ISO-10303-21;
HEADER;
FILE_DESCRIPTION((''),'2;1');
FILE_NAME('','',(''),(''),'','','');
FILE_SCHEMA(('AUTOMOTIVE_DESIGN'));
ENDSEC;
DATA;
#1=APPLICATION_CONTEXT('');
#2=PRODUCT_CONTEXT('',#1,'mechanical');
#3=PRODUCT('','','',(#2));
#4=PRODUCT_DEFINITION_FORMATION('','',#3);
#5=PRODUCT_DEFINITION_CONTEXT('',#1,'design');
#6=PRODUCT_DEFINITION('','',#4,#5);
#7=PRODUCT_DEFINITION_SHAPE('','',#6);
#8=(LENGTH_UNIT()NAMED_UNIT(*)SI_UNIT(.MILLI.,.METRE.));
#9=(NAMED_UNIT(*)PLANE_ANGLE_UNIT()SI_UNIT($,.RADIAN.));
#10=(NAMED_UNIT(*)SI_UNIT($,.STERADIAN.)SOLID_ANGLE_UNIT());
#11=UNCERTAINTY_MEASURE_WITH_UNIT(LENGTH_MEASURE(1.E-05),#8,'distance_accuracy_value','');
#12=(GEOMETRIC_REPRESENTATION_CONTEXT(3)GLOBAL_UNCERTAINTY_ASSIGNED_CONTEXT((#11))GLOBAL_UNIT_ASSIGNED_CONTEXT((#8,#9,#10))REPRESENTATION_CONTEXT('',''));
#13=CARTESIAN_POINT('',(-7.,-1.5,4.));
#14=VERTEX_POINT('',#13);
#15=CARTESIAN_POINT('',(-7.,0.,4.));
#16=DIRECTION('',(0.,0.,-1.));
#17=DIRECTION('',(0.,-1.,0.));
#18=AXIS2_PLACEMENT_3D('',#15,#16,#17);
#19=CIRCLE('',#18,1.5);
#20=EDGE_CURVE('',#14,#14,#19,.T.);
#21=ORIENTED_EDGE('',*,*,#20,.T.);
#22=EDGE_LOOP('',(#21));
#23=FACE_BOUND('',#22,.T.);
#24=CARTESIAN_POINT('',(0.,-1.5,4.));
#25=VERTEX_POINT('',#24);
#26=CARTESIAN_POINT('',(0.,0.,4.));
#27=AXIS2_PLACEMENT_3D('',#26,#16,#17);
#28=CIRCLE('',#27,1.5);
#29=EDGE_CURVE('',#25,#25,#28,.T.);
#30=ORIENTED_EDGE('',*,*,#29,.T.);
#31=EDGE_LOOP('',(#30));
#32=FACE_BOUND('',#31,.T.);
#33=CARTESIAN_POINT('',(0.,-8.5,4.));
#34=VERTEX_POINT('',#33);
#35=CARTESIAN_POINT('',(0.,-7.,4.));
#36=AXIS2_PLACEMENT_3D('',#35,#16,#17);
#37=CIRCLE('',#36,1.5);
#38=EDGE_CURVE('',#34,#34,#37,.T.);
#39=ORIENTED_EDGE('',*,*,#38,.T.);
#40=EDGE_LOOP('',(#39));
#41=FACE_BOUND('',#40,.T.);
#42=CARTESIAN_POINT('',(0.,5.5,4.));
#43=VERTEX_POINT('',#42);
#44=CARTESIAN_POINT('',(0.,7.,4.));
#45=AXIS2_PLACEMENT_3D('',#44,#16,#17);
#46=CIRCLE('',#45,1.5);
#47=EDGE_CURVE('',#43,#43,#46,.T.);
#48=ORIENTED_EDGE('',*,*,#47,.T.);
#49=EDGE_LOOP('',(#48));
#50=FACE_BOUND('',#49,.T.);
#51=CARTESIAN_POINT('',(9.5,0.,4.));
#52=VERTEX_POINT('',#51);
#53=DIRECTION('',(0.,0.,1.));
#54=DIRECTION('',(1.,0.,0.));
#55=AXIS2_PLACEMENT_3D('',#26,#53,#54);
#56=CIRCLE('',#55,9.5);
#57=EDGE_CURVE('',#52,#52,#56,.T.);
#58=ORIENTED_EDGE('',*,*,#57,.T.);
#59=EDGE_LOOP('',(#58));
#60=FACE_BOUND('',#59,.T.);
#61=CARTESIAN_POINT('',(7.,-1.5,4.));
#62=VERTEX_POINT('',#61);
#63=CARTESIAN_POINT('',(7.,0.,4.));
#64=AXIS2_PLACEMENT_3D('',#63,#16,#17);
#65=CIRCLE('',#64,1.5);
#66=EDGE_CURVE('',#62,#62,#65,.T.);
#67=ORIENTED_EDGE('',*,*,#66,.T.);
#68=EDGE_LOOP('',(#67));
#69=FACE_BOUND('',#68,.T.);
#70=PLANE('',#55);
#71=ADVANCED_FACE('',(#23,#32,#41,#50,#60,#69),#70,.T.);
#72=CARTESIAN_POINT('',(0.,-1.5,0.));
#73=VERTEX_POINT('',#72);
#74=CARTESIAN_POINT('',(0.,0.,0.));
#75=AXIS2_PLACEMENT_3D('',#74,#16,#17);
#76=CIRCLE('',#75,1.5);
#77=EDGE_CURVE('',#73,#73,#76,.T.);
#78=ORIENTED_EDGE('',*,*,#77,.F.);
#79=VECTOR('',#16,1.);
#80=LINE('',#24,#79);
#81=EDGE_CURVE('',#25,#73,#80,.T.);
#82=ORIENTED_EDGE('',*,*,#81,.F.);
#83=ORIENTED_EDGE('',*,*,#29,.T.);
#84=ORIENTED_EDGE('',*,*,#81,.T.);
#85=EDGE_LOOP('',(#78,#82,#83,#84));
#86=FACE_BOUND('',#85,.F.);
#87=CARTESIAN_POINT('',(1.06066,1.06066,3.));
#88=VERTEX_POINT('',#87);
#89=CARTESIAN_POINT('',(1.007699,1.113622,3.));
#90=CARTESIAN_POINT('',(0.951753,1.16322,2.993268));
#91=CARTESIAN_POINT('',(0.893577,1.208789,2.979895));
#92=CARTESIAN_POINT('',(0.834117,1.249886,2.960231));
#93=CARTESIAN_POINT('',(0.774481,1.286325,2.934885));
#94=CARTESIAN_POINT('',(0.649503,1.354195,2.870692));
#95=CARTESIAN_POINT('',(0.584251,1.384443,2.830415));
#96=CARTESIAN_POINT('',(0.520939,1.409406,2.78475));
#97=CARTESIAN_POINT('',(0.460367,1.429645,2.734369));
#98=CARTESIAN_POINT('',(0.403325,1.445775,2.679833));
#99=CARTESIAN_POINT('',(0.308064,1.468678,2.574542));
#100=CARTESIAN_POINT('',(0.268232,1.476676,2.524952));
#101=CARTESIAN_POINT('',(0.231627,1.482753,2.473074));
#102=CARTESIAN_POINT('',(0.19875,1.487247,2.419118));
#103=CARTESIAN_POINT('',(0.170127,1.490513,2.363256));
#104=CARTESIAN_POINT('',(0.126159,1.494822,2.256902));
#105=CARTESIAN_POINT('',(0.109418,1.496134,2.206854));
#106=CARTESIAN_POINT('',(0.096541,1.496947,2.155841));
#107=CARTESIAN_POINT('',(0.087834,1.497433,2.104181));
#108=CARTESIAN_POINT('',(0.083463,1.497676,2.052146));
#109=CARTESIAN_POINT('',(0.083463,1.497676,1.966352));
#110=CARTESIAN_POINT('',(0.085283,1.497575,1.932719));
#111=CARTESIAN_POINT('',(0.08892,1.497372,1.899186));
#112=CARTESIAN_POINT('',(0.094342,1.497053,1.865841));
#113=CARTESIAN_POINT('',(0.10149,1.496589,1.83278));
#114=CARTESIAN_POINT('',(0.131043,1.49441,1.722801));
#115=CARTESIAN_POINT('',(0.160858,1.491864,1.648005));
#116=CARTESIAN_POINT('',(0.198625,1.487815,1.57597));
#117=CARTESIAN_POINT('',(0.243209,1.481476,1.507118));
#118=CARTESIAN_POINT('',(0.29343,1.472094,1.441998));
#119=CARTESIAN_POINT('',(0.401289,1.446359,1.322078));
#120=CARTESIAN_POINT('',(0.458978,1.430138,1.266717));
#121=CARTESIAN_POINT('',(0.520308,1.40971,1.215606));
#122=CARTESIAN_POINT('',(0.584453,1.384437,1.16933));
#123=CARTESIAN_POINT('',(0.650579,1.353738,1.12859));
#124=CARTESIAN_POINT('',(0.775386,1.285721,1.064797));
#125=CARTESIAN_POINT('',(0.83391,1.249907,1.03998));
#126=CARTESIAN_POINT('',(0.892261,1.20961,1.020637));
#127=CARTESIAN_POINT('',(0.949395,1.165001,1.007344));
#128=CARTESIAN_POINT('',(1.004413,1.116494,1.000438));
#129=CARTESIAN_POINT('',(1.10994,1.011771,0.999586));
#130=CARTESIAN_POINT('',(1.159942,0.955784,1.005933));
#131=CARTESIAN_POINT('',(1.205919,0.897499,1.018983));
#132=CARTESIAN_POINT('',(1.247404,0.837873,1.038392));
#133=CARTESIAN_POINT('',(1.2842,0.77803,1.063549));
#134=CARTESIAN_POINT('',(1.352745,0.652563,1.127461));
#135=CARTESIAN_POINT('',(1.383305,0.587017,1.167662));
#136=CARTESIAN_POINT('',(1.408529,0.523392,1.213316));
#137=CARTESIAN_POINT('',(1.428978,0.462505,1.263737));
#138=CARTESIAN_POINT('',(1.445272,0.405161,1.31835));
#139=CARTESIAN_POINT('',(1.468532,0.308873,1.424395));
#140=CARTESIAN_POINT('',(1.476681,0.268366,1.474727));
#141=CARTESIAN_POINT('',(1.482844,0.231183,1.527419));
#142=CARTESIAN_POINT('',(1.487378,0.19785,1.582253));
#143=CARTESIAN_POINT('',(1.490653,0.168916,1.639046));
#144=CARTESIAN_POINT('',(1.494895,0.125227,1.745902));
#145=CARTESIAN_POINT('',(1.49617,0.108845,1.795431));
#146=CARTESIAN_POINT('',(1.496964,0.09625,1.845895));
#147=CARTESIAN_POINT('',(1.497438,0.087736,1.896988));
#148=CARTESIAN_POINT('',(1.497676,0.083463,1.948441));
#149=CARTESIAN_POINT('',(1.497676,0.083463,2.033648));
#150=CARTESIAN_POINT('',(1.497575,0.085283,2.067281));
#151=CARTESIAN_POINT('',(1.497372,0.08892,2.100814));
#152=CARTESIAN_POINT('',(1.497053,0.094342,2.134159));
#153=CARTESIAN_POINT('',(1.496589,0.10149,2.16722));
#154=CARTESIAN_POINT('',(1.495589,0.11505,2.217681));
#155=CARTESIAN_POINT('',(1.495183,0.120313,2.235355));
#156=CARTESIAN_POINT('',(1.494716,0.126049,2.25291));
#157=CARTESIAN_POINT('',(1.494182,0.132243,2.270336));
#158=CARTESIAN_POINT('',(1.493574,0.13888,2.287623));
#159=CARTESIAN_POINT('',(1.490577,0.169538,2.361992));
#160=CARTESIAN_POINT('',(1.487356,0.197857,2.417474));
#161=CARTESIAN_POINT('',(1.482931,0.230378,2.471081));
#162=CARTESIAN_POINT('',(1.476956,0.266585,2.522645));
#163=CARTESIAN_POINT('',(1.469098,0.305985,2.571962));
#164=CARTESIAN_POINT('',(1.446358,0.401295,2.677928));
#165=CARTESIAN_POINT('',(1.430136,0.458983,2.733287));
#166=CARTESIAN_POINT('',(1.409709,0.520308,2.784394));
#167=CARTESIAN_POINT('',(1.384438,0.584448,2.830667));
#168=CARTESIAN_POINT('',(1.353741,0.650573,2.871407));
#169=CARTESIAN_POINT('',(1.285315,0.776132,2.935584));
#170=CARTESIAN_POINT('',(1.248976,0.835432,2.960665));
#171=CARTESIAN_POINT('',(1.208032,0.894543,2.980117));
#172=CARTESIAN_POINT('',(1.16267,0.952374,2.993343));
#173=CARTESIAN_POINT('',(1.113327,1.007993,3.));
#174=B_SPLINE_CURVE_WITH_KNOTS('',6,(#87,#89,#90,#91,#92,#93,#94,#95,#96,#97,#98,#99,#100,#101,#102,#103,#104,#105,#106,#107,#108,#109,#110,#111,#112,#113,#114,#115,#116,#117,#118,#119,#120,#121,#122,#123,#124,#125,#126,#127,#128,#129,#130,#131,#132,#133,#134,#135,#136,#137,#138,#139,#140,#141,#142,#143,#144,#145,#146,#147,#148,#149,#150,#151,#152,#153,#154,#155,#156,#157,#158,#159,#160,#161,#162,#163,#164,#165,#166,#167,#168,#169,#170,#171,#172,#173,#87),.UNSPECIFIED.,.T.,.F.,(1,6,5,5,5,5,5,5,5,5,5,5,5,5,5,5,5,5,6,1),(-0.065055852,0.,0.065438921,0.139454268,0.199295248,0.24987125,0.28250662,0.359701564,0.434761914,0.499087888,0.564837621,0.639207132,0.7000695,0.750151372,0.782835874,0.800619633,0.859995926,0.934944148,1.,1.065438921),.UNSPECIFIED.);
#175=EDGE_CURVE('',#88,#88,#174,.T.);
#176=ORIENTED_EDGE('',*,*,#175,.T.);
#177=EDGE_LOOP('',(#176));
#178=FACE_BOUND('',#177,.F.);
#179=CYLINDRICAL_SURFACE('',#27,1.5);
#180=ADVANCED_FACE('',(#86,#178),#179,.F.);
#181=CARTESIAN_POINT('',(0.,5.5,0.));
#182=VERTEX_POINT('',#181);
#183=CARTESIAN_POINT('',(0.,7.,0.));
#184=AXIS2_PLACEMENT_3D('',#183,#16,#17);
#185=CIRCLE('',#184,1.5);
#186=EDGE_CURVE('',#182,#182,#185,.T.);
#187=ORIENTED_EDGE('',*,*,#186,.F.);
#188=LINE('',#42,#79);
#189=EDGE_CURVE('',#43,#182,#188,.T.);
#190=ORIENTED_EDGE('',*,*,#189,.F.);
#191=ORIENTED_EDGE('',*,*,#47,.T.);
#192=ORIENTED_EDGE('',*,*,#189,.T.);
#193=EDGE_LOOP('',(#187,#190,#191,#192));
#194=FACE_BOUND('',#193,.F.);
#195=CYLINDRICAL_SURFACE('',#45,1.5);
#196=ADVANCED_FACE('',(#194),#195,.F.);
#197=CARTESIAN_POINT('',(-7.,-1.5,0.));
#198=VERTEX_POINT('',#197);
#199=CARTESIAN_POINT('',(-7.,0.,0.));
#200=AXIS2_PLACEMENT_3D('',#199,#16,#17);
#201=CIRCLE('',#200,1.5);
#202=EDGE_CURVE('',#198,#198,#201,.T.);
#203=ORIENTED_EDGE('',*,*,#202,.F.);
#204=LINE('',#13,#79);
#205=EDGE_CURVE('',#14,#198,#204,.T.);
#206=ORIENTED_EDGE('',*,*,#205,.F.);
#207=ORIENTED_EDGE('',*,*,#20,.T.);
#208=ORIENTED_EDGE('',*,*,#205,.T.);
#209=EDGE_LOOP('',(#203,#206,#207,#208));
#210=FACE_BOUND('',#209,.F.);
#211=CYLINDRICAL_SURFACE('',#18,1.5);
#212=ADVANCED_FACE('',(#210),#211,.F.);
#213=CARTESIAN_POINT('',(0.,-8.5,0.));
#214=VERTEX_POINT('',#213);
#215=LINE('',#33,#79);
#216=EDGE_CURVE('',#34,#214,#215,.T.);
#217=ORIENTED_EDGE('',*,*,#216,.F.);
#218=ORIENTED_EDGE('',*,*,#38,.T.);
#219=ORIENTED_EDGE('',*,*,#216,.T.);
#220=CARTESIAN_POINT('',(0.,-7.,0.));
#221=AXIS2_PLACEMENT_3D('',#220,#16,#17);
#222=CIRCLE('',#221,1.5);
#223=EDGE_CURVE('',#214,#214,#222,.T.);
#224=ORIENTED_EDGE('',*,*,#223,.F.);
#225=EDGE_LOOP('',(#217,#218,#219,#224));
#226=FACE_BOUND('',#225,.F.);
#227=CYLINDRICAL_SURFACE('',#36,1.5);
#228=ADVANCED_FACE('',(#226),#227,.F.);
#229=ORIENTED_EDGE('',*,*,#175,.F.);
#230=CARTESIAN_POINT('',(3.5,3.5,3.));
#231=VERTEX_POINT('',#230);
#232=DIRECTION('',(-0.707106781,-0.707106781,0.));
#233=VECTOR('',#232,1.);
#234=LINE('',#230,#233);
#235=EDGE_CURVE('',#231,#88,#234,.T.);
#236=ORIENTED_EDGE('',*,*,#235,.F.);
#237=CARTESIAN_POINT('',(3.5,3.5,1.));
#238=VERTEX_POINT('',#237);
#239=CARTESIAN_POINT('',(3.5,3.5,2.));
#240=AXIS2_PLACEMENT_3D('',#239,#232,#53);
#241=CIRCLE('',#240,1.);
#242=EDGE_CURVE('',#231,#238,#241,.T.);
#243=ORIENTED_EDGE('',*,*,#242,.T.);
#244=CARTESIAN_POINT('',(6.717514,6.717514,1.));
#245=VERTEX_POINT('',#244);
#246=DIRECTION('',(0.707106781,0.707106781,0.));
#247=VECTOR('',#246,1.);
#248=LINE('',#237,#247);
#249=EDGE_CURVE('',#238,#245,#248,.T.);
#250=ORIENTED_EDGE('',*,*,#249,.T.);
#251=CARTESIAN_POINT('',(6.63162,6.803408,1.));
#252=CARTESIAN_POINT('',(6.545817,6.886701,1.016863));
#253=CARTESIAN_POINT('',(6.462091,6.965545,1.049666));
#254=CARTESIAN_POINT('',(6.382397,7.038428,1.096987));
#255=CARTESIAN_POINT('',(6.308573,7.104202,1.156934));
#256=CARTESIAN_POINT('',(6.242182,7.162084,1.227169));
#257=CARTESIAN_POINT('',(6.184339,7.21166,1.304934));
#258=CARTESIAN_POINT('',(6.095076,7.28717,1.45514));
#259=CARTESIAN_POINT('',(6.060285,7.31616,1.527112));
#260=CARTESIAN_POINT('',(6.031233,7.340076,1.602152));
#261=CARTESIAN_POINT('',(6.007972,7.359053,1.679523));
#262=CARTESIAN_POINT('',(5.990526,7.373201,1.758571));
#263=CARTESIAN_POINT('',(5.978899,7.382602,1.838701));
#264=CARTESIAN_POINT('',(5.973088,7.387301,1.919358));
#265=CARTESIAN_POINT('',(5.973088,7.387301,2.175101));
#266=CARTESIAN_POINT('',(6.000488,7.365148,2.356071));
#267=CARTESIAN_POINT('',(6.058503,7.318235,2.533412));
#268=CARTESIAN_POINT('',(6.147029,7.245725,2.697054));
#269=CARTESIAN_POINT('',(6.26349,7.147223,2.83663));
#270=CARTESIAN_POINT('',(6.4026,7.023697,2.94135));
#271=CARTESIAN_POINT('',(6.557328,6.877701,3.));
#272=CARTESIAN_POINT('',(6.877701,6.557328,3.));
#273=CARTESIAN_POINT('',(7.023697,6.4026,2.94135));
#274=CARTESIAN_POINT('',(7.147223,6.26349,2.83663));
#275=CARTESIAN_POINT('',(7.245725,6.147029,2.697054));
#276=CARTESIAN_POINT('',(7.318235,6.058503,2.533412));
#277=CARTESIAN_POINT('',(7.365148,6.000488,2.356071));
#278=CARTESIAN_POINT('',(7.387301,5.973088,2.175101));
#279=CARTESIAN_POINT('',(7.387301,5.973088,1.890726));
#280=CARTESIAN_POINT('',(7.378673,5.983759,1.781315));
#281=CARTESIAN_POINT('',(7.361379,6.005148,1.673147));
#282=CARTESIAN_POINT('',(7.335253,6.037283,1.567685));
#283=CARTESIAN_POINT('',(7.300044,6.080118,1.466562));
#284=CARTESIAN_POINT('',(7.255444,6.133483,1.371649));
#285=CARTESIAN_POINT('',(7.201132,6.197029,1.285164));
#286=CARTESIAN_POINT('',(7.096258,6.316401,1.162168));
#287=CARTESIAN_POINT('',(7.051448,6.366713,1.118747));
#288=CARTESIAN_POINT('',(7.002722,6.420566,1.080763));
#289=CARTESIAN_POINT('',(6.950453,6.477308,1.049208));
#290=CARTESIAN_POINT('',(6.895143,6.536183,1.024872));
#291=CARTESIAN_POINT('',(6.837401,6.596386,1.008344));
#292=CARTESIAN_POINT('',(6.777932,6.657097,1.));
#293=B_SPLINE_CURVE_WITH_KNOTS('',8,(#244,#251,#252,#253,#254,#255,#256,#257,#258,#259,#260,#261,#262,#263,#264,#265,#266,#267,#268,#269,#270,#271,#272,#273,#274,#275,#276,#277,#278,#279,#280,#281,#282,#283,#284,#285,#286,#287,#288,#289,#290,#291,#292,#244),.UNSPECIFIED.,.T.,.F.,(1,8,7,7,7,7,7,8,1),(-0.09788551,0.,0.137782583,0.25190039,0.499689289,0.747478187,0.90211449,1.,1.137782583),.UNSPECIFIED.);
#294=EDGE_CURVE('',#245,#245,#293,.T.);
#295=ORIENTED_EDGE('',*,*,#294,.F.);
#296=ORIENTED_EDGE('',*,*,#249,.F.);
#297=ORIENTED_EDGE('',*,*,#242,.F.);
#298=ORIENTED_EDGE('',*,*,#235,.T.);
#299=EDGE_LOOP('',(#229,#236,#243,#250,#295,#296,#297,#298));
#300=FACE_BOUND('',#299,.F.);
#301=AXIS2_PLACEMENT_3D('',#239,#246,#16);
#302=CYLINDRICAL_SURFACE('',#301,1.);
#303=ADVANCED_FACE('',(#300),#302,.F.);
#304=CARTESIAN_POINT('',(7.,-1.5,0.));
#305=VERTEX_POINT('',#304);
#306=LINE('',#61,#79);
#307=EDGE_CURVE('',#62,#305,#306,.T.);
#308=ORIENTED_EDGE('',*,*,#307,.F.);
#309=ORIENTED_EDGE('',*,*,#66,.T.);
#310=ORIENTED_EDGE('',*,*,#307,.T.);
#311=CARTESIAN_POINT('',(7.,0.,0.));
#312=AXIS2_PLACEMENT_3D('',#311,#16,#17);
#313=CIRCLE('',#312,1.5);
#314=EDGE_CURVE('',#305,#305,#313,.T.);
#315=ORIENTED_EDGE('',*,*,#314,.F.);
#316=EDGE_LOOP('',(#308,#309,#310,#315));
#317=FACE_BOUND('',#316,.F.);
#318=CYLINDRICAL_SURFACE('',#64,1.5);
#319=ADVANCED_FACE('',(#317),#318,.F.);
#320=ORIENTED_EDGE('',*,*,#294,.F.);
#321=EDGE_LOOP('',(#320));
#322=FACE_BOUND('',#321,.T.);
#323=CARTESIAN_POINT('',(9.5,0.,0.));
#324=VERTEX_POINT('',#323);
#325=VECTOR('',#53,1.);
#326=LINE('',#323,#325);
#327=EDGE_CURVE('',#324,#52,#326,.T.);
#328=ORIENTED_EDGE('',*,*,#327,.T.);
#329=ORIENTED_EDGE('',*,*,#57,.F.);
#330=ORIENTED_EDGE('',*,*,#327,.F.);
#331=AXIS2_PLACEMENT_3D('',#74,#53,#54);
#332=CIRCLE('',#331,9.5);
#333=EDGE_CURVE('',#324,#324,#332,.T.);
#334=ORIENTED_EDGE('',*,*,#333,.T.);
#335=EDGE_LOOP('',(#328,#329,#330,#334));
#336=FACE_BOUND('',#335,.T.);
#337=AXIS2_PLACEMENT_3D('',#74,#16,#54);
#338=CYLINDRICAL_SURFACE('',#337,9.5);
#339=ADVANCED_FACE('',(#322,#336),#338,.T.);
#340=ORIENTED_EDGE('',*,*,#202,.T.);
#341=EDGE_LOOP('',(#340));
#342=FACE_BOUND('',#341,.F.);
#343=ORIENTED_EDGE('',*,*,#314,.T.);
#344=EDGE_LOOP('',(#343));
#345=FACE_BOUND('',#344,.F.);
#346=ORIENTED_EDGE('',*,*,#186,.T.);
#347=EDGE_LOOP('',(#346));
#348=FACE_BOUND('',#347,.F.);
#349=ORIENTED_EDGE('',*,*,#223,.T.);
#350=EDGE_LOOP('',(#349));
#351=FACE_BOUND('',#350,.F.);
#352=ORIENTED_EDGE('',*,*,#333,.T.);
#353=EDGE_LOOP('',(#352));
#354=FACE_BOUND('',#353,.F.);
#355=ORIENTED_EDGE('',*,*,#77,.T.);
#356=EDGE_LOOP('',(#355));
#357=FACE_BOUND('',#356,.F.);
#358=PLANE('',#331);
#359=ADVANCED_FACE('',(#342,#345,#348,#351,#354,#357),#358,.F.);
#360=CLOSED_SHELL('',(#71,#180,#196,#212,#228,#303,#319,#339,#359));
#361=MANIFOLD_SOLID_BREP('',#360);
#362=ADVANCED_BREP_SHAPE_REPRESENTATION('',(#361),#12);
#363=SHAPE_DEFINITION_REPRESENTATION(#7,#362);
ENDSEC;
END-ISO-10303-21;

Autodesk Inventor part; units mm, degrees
ref_plane "YZ Plane" through (0, 0, 0) normal (1, 0, 0) x (0, 1, 0)
ref_plane "XZ Plane" through (0, 0, 0) normal (0, 1, 0) x (-1, 0, 0)
sketch "Эскиз1" plane through (0, 0, 0) normal (0, 0, 1) x (1, 0, 0)
  circle A0 centre (0, 0) radius 9.5
  dimension "d0" = 19
extrude "Выдавливание1" add sketch "Эскиз1" along normal blind 4
sketch "Эскиз2" plane through (0, 0, 4) normal (0, 0, 1) x (1, 0, 0)
  circle A0 centre (0, 0) radius 7 construction
  line L0 (-7, 0) -> (7, 0) construction
  line L1 (0, 7) -> (0, -7) construction
  dimension "d3" = 14
hole "Отверстие1" at (0, 7, 4) at (0, 0, 4) at (7, 0, 4) at (-7, 0, 4) at (0, -7, 4) direction (0, 0, -1) diameter 3 end through all
ref_plane "РабПлоскость1" through (7, 0, -23.1662) normal (-0.7071068, -0.7071068, 0) x (0, 0, 1)
sketch "Эскиз4" plane through (7, 0, -23.1662) normal (-0.7071068, -0.7071068, 0) x (0, 0, 1)
  line L0 (23.1662, 3.4497) -> (23.1662, 6.4497) projected
  line L1 (27.1662, 6.4497) -> (27.1662, 3.4497) projected
  line L2 (27.1662, -4.5503) -> (27.1662, 14.4497) projected
  line L3 (27.1662, 4.9497) -> (23.1662, 4.9497)
  point P0 (25.1662, 4.9497)
hole "Отверстие2" at (3.5, 3.5, 2) direction (0.7071068, 0.7071068, 0) diameter 2 end through all
sketch "Эскиз5" plane through (3.5, 3.5, 2) normal (0.7071068, 0.7071068, 0) x (-0.7071068, 0.7071068, 0)
  circle A0 centre (0, 0) radius 1 projected
  point P0 (0, -2)
hole "Отверстие3" at (3.5, 3.5, 2) direction (-0.7071068, -0.7071068, 0) diameter 2 end up to surface
thread "Резьба1" size "M3x0.5" class "6H" standard "ANSI Metric M Profile" full length
thread "Резьба2" size "M3x0.5" class "6H" standard "ANSI Metric M Profile" full length
thread "Резьба3" size "M3x0.5" class "6H" standard "ANSI Metric M Profile" full length
thread "Резьба4" size "M3x0.5" class "6H" standard "ANSI Metric M Profile" full length
thread "Резьба5" size "M2x0.4" class "6H" standard "ANSI Metric M Profile" full length
properties part number "Планшайба D19"
